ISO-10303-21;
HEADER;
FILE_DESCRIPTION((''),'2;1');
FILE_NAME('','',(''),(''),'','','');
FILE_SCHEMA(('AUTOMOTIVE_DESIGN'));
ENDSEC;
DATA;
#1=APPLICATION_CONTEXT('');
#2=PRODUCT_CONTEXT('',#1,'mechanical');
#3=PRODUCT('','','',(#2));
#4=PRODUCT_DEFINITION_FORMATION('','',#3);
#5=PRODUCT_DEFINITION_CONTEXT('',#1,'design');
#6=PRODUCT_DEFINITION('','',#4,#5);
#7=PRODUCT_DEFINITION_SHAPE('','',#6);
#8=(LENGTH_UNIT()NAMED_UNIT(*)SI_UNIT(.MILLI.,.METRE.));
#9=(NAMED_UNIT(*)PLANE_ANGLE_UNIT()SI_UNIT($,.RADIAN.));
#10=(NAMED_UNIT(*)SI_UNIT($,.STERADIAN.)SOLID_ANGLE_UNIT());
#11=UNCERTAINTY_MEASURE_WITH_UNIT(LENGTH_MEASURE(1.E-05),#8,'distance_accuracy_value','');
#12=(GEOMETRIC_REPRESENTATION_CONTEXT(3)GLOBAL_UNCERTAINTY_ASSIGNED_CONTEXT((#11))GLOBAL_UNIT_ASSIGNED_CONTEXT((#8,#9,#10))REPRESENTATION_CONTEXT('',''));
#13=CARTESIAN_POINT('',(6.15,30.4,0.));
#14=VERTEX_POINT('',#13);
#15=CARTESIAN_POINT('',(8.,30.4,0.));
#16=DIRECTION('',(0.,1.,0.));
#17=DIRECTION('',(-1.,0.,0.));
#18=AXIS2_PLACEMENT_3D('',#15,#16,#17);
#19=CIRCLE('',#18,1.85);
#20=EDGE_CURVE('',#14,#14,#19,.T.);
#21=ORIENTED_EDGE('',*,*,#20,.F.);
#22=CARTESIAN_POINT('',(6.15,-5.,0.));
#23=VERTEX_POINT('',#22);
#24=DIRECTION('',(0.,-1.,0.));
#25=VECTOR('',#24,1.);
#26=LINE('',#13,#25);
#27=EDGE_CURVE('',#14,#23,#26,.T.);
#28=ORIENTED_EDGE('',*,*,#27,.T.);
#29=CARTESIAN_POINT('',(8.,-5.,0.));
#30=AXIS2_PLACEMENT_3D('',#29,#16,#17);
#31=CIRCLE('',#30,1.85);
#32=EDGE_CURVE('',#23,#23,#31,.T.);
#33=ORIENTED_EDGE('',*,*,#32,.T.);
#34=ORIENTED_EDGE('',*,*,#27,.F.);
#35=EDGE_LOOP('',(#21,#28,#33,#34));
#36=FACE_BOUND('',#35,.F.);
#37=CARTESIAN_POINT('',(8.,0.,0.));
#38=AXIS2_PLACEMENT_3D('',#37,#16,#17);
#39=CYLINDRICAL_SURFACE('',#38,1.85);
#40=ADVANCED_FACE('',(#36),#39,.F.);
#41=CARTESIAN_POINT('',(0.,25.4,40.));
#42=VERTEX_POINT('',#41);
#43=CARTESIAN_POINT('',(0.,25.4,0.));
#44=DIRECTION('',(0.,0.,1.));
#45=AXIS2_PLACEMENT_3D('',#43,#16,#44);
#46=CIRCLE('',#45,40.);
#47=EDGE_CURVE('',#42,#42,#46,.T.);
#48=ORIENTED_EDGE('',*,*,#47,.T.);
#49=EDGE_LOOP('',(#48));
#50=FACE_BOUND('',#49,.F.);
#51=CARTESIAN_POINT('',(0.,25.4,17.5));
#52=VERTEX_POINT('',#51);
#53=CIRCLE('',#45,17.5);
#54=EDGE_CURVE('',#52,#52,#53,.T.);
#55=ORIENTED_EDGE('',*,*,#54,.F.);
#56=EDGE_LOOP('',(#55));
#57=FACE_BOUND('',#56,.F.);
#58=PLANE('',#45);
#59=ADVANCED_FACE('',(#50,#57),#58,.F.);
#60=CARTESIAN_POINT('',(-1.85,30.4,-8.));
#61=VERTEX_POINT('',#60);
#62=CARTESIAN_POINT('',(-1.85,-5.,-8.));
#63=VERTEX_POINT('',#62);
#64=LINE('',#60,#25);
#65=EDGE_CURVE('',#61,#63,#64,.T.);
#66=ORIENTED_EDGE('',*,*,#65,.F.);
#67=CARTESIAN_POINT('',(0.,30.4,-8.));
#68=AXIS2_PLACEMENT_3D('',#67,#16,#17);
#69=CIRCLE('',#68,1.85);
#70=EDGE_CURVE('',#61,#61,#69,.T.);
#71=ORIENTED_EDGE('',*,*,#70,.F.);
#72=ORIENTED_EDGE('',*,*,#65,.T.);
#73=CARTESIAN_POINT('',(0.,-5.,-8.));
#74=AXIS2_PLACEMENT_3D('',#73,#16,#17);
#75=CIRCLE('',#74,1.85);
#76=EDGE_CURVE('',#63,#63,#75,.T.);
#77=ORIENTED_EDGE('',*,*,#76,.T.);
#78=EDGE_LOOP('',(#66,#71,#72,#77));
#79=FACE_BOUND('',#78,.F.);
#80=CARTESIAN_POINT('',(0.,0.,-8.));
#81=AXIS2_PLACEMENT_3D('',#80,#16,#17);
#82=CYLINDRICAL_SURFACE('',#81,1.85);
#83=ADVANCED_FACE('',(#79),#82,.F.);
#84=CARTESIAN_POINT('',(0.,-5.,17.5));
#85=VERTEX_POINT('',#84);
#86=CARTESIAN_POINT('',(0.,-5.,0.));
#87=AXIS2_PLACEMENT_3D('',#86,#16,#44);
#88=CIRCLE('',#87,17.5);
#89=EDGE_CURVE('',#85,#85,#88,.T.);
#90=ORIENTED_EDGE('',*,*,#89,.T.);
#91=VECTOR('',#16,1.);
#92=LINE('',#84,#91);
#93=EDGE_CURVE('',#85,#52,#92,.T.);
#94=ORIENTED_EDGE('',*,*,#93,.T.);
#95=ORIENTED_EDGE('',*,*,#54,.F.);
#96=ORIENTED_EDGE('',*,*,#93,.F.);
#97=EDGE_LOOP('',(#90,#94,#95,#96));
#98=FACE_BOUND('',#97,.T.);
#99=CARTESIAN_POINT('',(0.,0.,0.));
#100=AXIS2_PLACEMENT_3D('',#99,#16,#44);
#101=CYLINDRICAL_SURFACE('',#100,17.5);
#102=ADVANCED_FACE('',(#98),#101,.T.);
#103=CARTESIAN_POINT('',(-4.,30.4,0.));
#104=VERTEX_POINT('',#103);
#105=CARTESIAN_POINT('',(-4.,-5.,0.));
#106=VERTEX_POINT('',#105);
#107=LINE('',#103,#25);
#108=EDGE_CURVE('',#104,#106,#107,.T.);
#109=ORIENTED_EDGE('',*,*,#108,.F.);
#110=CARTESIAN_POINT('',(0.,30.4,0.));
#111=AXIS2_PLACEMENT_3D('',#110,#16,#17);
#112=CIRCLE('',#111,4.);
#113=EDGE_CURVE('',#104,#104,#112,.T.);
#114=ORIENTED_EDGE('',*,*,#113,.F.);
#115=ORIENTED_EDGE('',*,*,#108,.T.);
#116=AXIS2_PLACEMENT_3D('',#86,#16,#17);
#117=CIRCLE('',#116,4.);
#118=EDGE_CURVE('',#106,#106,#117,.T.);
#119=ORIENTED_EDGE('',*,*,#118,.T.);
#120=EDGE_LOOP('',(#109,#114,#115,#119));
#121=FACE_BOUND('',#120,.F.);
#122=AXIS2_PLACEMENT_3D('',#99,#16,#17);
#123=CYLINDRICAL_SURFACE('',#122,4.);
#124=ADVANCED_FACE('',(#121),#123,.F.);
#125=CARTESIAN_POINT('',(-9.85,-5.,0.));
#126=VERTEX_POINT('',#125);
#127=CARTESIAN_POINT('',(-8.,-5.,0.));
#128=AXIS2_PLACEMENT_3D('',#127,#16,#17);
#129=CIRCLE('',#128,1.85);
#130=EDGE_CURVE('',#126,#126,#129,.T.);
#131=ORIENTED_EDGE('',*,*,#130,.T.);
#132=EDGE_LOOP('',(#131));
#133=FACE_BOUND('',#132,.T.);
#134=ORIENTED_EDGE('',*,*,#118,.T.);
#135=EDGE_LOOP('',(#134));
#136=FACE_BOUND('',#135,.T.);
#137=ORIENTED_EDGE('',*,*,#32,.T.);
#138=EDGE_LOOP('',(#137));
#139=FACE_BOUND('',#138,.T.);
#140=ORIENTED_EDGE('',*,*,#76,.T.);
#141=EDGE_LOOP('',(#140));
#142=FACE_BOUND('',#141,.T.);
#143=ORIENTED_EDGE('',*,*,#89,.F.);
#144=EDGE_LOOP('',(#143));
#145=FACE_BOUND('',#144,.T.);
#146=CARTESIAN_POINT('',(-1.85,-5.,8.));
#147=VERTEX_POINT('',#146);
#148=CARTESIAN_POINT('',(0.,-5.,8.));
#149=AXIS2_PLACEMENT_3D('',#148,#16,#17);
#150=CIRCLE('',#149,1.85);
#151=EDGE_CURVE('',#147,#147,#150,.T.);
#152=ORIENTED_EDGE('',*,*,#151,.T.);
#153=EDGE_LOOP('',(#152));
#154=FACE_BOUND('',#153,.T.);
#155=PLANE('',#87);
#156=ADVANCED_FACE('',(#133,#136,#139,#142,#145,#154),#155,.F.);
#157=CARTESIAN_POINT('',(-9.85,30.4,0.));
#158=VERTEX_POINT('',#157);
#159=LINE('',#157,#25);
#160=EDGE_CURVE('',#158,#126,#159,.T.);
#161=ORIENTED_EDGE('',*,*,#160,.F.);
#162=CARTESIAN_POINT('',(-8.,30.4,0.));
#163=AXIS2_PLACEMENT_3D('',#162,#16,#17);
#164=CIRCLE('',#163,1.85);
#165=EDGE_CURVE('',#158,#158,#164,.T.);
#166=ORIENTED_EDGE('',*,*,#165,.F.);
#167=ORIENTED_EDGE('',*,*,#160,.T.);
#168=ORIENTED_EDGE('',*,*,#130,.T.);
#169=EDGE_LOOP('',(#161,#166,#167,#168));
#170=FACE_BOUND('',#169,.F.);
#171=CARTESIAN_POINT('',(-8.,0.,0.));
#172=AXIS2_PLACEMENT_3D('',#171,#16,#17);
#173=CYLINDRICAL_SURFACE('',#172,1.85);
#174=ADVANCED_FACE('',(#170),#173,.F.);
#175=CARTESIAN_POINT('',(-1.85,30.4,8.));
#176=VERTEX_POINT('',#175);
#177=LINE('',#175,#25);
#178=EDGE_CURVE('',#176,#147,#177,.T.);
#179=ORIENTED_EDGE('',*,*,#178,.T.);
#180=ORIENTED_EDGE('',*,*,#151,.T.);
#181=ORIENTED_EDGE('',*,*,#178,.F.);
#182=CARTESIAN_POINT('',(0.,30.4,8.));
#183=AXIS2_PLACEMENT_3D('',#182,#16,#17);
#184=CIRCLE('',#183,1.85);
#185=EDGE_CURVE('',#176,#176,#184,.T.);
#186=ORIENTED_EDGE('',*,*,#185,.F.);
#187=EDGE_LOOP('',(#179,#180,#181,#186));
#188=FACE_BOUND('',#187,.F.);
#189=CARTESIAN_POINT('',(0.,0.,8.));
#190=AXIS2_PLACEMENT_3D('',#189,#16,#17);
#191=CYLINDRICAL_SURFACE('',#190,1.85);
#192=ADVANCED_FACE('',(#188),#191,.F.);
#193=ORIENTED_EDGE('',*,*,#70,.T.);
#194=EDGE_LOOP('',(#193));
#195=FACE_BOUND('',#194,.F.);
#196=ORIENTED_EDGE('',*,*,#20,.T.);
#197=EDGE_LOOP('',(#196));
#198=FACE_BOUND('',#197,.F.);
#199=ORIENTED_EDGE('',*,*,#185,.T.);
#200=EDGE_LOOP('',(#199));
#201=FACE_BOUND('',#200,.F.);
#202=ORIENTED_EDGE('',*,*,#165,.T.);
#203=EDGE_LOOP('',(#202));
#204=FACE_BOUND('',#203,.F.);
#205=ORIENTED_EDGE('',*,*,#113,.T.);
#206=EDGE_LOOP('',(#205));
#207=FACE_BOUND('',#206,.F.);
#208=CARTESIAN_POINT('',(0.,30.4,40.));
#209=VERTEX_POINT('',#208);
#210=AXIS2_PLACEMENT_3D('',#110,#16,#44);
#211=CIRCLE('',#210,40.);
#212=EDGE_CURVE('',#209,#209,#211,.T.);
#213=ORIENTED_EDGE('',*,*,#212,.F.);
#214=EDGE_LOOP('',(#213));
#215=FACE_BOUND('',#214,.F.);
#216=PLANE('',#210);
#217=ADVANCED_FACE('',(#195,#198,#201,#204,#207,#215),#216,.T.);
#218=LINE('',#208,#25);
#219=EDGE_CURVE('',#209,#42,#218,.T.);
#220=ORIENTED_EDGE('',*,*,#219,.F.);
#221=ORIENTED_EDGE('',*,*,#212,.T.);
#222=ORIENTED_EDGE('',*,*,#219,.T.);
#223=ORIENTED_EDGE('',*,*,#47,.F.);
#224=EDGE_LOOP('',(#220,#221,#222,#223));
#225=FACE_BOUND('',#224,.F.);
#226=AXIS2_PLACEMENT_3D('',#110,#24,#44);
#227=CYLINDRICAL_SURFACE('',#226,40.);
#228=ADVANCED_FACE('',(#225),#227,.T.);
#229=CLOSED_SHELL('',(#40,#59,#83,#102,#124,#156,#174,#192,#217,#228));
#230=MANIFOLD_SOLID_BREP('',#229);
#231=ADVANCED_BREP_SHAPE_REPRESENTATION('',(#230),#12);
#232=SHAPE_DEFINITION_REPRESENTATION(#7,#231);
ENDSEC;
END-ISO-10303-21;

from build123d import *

# Parameters (mm, degrees)
F0_W     = 25.4
F0_H     = 17.5
F2_R     = 1.85
F2_R_2   = 4
F3_DEPTH = 40
F4_DEPTH = 5


# Not quite as in the source:
# - a feature names something its author has since deleted; it is built from what else it names


with BuildPart() as f1:
    # F0 (on Right) → F1 (revolve)
    with BuildSketch(Plane.YZ):
        with Locations((12.7, 8.75)):
            Rectangle(F0_W, F0_H)
        Polygon((25.4, 17.5), (25.4, 0), (30.4, 0), (30.4, 40), (25.4, 40), align=None)
    revolve(axis=Axis((0, 12.7, 0), (0, 1, 0)))

    # F2 (on face) → F3 (cut)
    with BuildSketch(Plane(origin=(0, 30.4, 0), x_dir=(-1, 0, 0), z_dir=(0, 1, 0))):
        with Locations((0, 8)):
            Circle(F2_R)
        with Locations((-8, 0)):
            Circle(F2_R)
        Circle(F2_R_2)
        with Locations((0, -8)):
            Circle(F2_R)
        with Locations((8, 0)):
            Circle(F2_R)
    extrude(amount=-F3_DEPTH, mode=Mode.SUBTRACT)

    # F4 (add): a face of the model
    f4_faces = [f1.faces().sort_by_distance(p)[0] for p in [
        (0, 0, -17.0050252532),
    ]]
    extrude(f4_faces, amount=F4_DEPTH)


solid = f1.part
